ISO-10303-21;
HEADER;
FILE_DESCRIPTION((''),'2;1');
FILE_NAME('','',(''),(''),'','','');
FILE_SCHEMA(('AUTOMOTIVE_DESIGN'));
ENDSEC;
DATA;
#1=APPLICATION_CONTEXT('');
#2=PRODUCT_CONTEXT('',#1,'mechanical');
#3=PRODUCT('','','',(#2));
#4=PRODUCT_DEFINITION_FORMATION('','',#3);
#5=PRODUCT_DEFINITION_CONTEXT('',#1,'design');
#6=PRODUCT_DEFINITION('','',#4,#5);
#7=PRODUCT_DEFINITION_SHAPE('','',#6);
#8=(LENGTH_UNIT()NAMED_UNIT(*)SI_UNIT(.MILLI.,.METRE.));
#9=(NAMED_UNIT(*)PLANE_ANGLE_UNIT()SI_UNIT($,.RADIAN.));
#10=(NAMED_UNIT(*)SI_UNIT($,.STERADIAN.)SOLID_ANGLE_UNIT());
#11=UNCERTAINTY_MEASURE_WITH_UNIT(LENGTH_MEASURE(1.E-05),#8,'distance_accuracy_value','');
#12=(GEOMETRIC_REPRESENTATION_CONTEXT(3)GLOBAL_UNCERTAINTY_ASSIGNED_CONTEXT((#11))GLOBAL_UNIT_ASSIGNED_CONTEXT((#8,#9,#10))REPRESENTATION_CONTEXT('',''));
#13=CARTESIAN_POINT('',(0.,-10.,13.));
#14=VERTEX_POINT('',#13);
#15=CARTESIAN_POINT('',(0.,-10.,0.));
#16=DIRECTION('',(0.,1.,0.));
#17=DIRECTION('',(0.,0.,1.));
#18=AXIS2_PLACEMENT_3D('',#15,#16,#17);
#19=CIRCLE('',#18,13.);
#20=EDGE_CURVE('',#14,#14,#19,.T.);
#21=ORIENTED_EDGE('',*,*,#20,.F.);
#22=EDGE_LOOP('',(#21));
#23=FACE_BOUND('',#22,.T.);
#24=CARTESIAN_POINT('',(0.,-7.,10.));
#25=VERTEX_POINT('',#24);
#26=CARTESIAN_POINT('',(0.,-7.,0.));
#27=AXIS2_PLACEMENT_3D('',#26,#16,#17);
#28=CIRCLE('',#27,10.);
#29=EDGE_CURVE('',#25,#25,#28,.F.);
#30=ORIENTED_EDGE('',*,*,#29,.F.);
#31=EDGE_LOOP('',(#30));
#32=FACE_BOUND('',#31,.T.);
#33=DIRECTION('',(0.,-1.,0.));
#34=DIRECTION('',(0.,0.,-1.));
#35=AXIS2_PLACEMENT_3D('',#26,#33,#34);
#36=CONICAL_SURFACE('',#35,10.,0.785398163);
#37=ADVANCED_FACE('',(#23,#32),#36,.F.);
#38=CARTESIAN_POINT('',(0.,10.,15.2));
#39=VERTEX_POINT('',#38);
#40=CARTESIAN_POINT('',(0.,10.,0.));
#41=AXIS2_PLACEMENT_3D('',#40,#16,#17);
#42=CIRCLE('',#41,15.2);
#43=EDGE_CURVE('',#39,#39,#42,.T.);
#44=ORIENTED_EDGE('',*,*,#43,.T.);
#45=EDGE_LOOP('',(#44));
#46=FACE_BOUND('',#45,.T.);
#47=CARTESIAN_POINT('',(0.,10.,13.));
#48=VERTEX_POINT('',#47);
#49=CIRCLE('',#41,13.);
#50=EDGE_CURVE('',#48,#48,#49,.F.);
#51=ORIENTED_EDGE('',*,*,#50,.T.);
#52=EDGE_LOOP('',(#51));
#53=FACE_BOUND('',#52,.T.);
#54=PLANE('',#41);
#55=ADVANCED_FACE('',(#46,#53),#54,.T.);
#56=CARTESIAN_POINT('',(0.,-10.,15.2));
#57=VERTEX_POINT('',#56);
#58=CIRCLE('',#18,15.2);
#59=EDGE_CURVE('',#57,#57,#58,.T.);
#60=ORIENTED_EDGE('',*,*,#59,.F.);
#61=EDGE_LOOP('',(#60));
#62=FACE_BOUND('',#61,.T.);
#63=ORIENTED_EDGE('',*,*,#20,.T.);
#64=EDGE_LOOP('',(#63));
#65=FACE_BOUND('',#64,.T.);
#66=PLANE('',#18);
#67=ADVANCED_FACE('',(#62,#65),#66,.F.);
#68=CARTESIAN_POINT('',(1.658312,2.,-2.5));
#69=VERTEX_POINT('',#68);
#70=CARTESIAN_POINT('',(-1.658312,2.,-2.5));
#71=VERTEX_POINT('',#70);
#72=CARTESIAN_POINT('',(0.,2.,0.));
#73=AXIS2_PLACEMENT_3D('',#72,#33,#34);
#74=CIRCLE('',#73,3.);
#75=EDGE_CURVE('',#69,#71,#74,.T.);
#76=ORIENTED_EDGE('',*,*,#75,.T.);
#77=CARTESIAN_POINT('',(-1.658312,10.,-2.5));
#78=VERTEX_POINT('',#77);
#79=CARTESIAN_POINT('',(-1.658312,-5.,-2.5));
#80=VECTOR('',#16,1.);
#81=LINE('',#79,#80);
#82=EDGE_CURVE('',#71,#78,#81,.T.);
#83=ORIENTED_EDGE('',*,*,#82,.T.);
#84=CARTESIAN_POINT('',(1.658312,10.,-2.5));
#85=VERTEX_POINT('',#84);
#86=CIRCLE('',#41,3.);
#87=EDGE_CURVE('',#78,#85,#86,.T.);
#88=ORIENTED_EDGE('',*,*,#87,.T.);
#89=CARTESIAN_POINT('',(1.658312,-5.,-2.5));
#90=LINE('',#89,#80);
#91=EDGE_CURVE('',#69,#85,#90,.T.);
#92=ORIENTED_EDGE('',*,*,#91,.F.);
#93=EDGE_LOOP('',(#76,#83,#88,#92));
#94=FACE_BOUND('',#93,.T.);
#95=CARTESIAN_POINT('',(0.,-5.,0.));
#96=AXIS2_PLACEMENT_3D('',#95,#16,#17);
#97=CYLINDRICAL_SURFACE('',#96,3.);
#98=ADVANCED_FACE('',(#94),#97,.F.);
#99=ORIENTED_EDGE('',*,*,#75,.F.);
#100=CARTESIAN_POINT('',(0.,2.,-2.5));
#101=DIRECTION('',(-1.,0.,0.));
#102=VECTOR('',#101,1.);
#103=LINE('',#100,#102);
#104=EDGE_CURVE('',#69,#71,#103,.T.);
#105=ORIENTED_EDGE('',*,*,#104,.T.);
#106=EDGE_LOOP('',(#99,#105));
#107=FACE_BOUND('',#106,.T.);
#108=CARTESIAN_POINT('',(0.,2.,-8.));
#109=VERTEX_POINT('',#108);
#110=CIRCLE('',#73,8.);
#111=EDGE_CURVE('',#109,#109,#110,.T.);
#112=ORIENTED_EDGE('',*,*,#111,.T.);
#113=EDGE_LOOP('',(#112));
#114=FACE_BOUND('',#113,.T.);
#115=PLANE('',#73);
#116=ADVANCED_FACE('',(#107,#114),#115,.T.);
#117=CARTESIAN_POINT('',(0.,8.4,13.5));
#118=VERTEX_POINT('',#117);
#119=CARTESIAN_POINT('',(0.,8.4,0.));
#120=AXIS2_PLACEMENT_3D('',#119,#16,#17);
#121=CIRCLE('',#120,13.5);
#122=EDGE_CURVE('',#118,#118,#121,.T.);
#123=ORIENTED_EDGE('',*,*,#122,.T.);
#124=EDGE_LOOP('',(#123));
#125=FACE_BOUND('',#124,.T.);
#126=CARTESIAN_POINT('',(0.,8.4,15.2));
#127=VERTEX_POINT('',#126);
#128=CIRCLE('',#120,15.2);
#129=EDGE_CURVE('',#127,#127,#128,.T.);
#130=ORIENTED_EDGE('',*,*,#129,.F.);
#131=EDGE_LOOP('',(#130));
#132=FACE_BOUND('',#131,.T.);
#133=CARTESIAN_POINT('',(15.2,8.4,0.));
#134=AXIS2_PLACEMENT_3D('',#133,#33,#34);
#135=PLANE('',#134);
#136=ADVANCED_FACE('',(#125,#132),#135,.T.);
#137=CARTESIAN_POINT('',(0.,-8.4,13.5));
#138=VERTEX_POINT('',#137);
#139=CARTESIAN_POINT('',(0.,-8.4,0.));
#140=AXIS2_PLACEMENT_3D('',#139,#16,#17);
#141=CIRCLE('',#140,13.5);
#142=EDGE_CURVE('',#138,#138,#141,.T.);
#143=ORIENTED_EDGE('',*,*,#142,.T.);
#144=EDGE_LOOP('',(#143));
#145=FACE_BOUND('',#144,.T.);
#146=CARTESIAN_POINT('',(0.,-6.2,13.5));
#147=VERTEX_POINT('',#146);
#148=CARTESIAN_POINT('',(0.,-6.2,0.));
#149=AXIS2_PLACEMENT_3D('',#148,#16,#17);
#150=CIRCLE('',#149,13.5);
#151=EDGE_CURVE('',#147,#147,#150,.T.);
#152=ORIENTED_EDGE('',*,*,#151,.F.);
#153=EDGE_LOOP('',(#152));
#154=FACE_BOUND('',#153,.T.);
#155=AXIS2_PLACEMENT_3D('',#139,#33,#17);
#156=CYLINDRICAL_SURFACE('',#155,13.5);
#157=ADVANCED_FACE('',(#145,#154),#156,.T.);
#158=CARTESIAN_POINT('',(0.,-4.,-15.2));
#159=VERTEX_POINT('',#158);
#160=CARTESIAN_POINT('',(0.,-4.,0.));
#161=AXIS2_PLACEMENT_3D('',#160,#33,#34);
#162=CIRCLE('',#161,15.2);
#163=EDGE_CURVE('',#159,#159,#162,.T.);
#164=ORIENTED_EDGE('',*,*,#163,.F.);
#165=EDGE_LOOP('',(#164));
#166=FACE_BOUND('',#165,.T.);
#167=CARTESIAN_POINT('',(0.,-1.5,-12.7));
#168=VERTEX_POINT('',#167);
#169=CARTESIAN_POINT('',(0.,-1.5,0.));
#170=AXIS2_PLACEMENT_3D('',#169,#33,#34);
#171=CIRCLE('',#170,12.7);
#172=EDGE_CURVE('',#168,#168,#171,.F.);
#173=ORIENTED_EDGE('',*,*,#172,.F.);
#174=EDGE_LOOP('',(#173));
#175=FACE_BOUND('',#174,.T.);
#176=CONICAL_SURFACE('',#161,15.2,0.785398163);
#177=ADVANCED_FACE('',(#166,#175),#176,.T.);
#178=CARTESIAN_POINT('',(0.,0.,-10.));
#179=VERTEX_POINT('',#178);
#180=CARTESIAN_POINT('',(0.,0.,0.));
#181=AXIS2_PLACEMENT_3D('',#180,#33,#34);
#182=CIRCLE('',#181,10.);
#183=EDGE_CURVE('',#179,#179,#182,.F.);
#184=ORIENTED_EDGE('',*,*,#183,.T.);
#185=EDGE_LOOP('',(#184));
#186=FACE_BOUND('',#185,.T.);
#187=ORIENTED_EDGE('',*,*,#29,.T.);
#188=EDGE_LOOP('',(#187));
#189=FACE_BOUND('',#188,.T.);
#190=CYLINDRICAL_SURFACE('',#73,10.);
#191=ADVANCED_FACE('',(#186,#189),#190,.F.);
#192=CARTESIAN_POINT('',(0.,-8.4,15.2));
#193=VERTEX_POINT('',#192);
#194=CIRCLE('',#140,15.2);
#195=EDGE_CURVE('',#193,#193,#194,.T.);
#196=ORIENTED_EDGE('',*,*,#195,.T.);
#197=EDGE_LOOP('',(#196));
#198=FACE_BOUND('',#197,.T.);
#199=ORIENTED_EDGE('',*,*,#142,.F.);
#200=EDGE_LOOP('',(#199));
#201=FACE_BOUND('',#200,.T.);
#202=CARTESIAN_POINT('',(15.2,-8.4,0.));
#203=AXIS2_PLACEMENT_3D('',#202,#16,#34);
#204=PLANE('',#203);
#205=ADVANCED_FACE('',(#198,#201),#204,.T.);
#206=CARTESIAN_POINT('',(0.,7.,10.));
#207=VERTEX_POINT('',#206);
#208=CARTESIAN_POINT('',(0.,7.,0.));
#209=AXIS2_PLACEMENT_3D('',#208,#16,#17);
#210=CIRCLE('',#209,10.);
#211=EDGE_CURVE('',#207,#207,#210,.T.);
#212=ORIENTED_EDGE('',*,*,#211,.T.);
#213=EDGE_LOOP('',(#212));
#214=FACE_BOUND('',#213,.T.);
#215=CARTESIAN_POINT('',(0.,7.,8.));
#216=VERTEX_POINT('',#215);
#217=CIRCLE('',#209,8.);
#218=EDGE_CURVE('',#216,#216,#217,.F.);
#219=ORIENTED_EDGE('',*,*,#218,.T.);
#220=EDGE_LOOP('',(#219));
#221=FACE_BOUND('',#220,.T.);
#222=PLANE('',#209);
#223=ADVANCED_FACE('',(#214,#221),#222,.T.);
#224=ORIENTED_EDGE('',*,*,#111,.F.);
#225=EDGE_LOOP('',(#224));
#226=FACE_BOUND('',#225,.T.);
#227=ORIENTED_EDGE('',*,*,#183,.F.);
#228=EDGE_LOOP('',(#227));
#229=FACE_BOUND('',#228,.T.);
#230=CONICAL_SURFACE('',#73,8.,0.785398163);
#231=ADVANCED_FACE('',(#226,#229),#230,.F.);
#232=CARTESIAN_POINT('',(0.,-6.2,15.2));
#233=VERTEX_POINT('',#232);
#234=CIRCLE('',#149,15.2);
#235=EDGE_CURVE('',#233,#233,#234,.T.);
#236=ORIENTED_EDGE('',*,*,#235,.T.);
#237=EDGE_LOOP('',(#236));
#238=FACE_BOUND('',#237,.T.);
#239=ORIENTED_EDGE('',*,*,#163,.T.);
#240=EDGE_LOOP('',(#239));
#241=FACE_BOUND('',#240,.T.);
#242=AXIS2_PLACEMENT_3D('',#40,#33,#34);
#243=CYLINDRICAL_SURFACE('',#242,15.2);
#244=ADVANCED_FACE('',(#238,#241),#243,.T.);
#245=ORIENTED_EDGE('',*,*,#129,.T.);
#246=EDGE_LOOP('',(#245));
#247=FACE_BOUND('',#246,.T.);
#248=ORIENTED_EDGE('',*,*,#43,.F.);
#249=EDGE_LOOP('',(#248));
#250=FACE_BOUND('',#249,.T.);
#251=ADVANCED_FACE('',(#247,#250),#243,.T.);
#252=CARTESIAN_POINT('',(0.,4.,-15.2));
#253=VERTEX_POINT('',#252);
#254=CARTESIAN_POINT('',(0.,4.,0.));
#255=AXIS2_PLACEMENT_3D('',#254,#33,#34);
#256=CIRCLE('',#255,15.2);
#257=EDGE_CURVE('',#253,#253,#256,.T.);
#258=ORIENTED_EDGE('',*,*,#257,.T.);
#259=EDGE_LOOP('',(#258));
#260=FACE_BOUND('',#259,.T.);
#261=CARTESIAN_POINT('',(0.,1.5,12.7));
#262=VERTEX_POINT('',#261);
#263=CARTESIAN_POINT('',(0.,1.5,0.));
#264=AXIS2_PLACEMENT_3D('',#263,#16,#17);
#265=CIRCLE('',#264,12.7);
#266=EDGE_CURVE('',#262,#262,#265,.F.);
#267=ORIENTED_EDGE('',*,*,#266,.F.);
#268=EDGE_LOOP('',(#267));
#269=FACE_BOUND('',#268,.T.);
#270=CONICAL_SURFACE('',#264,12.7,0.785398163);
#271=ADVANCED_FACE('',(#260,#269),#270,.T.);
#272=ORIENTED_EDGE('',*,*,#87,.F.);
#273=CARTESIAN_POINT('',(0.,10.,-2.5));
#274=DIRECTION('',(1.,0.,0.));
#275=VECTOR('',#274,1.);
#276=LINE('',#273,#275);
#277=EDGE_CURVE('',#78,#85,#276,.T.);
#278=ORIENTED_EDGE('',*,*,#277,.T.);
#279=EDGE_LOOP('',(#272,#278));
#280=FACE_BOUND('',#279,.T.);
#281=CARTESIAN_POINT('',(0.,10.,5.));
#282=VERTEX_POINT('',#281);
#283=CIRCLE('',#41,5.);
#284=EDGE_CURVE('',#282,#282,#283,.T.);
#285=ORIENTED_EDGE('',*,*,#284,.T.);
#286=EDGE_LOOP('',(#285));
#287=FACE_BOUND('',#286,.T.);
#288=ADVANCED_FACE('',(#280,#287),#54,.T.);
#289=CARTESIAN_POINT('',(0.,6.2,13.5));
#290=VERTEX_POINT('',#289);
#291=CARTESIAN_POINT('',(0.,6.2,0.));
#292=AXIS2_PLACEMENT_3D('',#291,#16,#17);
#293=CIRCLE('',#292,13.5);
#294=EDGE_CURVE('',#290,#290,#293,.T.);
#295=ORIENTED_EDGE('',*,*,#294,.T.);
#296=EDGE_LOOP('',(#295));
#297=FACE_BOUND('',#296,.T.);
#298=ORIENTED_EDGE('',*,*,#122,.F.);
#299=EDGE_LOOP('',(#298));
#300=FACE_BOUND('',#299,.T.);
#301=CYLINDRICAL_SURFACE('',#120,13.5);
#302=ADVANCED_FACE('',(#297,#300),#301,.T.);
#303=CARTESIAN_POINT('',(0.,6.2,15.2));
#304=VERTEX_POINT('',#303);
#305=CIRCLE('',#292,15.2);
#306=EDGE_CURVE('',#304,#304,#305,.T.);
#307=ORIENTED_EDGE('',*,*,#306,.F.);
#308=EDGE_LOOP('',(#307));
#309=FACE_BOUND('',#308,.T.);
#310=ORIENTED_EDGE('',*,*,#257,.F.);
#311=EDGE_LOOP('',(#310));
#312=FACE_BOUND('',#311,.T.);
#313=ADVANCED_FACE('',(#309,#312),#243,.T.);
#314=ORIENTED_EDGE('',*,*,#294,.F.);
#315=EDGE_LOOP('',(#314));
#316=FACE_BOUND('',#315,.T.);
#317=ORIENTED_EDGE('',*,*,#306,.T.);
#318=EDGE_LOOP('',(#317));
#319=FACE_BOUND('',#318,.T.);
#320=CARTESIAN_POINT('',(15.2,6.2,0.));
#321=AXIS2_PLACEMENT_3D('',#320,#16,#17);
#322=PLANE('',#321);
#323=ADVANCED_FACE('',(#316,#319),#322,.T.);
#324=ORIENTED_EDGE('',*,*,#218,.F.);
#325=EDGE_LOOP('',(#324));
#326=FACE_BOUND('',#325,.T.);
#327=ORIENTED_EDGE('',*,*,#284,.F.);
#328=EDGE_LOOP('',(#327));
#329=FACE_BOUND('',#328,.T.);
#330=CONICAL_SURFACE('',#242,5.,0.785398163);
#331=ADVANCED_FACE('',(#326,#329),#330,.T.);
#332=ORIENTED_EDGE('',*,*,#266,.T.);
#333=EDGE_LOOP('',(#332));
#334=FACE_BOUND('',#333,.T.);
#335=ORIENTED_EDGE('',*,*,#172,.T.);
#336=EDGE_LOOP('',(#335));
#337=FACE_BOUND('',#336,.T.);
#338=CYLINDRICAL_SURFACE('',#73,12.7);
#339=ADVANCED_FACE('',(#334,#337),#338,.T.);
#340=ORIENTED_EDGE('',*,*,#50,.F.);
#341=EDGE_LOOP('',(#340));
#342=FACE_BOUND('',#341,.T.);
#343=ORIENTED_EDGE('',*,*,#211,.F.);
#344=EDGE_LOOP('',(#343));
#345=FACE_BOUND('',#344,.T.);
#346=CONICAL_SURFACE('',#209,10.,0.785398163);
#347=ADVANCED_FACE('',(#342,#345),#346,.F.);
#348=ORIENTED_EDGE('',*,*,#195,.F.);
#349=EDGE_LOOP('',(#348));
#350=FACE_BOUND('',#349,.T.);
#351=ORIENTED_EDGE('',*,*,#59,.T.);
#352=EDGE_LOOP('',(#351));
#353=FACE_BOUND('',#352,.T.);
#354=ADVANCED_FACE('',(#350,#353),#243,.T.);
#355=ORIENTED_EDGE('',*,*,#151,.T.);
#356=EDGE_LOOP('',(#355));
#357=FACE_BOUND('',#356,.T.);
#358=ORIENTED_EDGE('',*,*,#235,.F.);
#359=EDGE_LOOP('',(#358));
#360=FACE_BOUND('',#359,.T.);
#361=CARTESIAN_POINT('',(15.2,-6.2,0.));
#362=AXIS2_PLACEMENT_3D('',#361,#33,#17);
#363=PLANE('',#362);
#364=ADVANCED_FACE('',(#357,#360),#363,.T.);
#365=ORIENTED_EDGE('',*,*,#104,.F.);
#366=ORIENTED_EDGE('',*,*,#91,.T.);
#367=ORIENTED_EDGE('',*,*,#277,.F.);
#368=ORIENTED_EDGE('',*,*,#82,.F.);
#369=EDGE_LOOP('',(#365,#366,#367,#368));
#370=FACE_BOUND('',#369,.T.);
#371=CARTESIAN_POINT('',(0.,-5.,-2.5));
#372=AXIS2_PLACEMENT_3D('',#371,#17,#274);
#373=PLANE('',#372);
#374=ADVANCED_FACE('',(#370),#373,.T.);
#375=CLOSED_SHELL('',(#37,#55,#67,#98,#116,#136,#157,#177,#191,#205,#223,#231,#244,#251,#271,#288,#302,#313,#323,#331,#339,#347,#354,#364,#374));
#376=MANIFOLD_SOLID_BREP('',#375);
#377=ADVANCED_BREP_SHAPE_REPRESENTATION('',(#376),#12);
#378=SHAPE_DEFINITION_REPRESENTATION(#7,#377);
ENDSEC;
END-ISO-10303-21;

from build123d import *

# Parameters (mm, degrees)
SKETCH_1_R          = 15.2
EXTRUDE_1_DEPTH     = 10
SKETCH_2_W          = 1.7
SKETCH_2_H          = 2.2
SKETCH_4_R          = 10
CUT_EXTRUDE_1_DEPTH = 12
CUT_EXTRUDE_2_DEPTH = 15
CHAMFER_1_SIZE      = 3
CUT_EXTRUDE_START   = -3
SKETCH_6_R          = 10
SKETCH_6_R_2        = 5
CUT_EXTRUDE_3_DEPTH = 3
CHAMFER_2_SIZE      = 3
SKETCH_7_W          = 2.5
SKETCH_7_H          = 8
CHAMFER_3_SIZE      = 2.5
CHAMFER_4_SIZE      = 2


with BuildPart() as part:
    # 草图1 → 凸台-拉伸1 (new, symmetric)
    with BuildSketch(Plane(origin=(0, 0, 0), x_dir=(1, 0, 0), z_dir=(0, 1, 0))):
        with Locations(Location((0, 0, 0), (0, 0, 270))):
            Circle(SKETCH_1_R)
    extrude(amount=EXTRUDE_1_DEPTH, both=True)

    # 草图2 → 切除-旋转1 (revolve, cut)
    with BuildSketch(Plane.XY, mode=Mode.PRIVATE) as cut_revolve_1_sk:
        with Locations((14.35, 7.3)):
            Rectangle(SKETCH_2_W, SKETCH_2_H)
    cut_revolve_1 = revolve(cut_revolve_1_sk.sketch.rotate(Axis((0, 8.4, 0), (0, -1, 0)), 90), axis=Axis((0, 8.4, 0), (0, -1, 0)), mode=Mode.SUBTRACT)

    # 镜向1: 切除-旋转1 across plane
    add(cut_revolve_1.mirror(Plane.ZX), mode=Mode.SUBTRACT)

    # 草图4 → 切除-拉伸1 (cut)
    with BuildSketch(Plane.XZ.offset(10)):
        with Locations(Location((0, 0, 0), (0, 0, 270))):
            Circle(SKETCH_4_R)
    extrude(amount=-CUT_EXTRUDE_1_DEPTH, mode=Mode.SUBTRACT)

    # 草图5 → 切除-拉伸2 (cut)
    with BuildSketch(Plane(origin=(0, 10, 0), x_dir=(1, 0, 0), z_dir=(0, 1, 0))):
        with BuildLine():
            Line((1.658312395, 2.5), (-1.658312395, 2.5))
            ThreePointArc((-1.658312395, 2.5), (-1.418637165, -2.643382037), (3, 0))
            ThreePointArc((3, 0), (2.643382037, 1.418637165), (1.658312395, 2.5))
        make_face()
    extrude(amount=-CUT_EXTRUDE_2_DEPTH, mode=Mode.SUBTRACT)

    # 倒角1
    chamfer_1_edges = [part.edges().sort_by_distance(p)[0] for p in [
        (0, -10, 10),
    ]]
    chamfer(chamfer_1_edges, length=CHAMFER_1_SIZE)

    # 草图6 → 切除-拉伸3 (cut)
    with BuildSketch(Plane(origin=(0, 10, 0), x_dir=(1, 0, 0), z_dir=(0, 1, 0)).offset(CUT_EXTRUDE_START)):
        with Locations(Location((0, 0, 0), (0, 0, 90))):
            Circle(SKETCH_6_R)
        with Locations(Location((0, 0, 0), (0, 0, 270))):
            Circle(SKETCH_6_R_2, mode=Mode.SUBTRACT)
    extrude(amount=CUT_EXTRUDE_3_DEPTH, mode=Mode.SUBTRACT)

    # 倒角2
    chamfer_2_edges = [part.edges().sort_by_distance(p)[0] for p in [
        (0, 7, -5),
        (0, 10, 10),
    ]]
    chamfer(chamfer_2_edges, length=CHAMFER_2_SIZE - 0.0001)  # a hair under: the kernel refuses the full size

    # 草图7 → 切除-旋转2 (revolve, cut)
    with BuildSketch(Plane(origin=(0, 0, 0), x_dir=(0, 0, -1), z_dir=(1, 0, 0))):
        with Locations((13.95, 0)):
            Rectangle(SKETCH_7_W, SKETCH_7_H)
    revolve(axis=Axis((0, 2, 0), (0, 1, 0)), mode=Mode.SUBTRACT)

    # 倒角3
    chamfer_3_edges = [part.edges().sort_by_distance(p)[0] for p in [
        (0, -4, 12.7),
        (0, 4, 12.7),
    ]]
    chamfer(chamfer_3_edges, length=CHAMFER_3_SIZE - 0.0001)  # a hair under: the kernel refuses the full size

    # 倒角4
    chamfer_4_edges = [part.edges().sort_by_distance(p)[0] for p in [
        (0, 2, 10),
    ]]
    chamfer(chamfer_4_edges, length=CHAMFER_4_SIZE)


solid = part.part
